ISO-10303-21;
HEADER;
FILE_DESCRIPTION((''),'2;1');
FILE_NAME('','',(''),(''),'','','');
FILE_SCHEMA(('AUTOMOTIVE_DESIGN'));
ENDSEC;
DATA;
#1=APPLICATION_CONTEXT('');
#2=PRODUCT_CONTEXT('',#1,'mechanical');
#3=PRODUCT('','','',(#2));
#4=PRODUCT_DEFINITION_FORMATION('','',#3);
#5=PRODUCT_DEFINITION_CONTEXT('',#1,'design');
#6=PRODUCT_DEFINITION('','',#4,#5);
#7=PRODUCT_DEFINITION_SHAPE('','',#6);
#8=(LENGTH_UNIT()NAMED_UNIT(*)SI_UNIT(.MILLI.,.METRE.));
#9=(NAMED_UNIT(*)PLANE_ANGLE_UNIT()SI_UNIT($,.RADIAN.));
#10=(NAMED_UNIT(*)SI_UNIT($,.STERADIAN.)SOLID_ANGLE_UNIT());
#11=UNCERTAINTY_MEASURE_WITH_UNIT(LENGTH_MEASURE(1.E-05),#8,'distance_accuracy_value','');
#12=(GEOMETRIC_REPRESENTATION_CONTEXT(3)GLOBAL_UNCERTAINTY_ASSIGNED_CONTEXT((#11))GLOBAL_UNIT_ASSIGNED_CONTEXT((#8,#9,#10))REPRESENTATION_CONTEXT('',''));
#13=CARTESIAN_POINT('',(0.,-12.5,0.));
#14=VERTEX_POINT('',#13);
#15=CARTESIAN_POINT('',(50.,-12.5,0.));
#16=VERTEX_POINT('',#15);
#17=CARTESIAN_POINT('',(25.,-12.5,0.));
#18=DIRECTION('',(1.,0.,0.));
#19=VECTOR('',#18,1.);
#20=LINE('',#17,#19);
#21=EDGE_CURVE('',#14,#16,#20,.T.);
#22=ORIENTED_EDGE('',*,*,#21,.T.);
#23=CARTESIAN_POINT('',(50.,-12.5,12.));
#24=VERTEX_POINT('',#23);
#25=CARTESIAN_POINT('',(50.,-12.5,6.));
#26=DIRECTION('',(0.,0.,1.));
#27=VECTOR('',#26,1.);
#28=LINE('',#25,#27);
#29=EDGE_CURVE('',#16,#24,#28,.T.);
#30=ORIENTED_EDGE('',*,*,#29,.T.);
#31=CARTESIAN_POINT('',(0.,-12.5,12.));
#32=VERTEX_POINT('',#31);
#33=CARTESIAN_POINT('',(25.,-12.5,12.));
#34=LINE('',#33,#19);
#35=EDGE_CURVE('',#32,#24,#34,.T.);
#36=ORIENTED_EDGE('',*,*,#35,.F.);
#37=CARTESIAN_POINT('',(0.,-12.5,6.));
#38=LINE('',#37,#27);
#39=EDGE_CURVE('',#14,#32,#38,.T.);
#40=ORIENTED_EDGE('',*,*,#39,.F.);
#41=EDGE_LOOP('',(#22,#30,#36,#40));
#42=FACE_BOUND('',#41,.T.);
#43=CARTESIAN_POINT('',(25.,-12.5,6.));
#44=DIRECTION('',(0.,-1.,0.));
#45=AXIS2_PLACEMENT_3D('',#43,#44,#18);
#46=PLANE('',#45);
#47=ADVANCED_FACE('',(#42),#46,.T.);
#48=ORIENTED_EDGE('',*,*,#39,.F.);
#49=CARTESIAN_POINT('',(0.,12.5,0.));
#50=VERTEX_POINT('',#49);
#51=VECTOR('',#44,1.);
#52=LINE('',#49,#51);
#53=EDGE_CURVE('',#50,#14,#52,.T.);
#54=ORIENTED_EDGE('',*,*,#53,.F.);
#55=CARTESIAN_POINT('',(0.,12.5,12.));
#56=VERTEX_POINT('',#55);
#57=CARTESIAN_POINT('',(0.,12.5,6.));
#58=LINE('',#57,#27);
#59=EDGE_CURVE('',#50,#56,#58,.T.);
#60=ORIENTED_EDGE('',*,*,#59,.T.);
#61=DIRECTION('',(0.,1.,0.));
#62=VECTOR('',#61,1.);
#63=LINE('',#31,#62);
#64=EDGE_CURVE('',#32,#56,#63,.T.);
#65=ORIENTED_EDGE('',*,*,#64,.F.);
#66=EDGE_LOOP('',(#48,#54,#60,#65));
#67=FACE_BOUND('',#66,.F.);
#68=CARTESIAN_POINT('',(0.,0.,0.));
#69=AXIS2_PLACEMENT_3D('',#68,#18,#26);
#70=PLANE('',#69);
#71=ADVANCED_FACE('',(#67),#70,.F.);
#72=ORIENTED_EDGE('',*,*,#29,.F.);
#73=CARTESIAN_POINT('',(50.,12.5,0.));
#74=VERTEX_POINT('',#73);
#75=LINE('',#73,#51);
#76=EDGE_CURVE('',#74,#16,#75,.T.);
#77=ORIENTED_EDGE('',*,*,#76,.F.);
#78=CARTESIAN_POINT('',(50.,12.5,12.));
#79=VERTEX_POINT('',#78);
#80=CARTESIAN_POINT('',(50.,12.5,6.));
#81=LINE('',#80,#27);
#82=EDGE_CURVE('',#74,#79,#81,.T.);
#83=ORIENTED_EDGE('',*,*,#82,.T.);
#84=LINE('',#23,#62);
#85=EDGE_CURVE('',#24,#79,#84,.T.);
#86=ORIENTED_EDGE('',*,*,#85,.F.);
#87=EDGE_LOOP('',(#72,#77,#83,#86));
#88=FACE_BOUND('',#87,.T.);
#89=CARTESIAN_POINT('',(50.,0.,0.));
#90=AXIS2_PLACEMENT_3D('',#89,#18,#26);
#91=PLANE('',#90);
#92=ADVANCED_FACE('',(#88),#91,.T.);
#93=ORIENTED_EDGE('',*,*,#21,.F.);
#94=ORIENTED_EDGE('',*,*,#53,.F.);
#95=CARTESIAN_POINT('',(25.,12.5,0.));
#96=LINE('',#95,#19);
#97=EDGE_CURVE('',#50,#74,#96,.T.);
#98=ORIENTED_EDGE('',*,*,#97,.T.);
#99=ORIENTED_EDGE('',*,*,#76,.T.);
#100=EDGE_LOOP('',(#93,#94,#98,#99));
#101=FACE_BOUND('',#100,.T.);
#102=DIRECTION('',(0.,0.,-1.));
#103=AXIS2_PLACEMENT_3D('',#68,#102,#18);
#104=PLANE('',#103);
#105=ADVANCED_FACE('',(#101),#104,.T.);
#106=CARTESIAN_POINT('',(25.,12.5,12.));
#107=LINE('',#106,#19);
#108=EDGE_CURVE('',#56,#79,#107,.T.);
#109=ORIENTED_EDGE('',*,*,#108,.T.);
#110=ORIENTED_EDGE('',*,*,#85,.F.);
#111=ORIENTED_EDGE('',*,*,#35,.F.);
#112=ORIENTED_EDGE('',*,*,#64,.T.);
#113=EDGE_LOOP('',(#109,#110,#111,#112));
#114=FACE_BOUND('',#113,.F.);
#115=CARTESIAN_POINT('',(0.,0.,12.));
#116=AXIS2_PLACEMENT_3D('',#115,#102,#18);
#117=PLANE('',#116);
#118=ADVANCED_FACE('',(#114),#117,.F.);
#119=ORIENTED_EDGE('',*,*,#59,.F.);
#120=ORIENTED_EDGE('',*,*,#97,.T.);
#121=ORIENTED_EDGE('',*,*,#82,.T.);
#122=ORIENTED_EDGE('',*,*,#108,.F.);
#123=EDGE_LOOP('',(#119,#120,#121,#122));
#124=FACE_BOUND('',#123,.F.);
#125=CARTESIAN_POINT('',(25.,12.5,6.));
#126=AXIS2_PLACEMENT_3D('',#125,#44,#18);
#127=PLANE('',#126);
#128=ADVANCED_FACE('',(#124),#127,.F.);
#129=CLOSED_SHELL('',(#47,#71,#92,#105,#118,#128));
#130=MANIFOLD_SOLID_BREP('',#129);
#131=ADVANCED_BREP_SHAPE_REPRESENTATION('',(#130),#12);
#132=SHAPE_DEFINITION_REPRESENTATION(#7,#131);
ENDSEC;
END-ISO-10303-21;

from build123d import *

# Parameters (mm, degrees)
F0_W     = 50
F0_H     = 12
F1_DEPTH = 12.5


# Not quite as in the source:
# - a feature of the source that left no trace in its solid (it failed there, or was rolled back) is left out


with BuildPart() as f1:
    # F0 (on Front) → F1 (new body, symmetric)
    with BuildSketch(Plane.XZ):
        with Locations((25, 6)):
            Rectangle(F0_W, F0_H)
    extrude(amount=F1_DEPTH, both=True)


solid = f1.part
